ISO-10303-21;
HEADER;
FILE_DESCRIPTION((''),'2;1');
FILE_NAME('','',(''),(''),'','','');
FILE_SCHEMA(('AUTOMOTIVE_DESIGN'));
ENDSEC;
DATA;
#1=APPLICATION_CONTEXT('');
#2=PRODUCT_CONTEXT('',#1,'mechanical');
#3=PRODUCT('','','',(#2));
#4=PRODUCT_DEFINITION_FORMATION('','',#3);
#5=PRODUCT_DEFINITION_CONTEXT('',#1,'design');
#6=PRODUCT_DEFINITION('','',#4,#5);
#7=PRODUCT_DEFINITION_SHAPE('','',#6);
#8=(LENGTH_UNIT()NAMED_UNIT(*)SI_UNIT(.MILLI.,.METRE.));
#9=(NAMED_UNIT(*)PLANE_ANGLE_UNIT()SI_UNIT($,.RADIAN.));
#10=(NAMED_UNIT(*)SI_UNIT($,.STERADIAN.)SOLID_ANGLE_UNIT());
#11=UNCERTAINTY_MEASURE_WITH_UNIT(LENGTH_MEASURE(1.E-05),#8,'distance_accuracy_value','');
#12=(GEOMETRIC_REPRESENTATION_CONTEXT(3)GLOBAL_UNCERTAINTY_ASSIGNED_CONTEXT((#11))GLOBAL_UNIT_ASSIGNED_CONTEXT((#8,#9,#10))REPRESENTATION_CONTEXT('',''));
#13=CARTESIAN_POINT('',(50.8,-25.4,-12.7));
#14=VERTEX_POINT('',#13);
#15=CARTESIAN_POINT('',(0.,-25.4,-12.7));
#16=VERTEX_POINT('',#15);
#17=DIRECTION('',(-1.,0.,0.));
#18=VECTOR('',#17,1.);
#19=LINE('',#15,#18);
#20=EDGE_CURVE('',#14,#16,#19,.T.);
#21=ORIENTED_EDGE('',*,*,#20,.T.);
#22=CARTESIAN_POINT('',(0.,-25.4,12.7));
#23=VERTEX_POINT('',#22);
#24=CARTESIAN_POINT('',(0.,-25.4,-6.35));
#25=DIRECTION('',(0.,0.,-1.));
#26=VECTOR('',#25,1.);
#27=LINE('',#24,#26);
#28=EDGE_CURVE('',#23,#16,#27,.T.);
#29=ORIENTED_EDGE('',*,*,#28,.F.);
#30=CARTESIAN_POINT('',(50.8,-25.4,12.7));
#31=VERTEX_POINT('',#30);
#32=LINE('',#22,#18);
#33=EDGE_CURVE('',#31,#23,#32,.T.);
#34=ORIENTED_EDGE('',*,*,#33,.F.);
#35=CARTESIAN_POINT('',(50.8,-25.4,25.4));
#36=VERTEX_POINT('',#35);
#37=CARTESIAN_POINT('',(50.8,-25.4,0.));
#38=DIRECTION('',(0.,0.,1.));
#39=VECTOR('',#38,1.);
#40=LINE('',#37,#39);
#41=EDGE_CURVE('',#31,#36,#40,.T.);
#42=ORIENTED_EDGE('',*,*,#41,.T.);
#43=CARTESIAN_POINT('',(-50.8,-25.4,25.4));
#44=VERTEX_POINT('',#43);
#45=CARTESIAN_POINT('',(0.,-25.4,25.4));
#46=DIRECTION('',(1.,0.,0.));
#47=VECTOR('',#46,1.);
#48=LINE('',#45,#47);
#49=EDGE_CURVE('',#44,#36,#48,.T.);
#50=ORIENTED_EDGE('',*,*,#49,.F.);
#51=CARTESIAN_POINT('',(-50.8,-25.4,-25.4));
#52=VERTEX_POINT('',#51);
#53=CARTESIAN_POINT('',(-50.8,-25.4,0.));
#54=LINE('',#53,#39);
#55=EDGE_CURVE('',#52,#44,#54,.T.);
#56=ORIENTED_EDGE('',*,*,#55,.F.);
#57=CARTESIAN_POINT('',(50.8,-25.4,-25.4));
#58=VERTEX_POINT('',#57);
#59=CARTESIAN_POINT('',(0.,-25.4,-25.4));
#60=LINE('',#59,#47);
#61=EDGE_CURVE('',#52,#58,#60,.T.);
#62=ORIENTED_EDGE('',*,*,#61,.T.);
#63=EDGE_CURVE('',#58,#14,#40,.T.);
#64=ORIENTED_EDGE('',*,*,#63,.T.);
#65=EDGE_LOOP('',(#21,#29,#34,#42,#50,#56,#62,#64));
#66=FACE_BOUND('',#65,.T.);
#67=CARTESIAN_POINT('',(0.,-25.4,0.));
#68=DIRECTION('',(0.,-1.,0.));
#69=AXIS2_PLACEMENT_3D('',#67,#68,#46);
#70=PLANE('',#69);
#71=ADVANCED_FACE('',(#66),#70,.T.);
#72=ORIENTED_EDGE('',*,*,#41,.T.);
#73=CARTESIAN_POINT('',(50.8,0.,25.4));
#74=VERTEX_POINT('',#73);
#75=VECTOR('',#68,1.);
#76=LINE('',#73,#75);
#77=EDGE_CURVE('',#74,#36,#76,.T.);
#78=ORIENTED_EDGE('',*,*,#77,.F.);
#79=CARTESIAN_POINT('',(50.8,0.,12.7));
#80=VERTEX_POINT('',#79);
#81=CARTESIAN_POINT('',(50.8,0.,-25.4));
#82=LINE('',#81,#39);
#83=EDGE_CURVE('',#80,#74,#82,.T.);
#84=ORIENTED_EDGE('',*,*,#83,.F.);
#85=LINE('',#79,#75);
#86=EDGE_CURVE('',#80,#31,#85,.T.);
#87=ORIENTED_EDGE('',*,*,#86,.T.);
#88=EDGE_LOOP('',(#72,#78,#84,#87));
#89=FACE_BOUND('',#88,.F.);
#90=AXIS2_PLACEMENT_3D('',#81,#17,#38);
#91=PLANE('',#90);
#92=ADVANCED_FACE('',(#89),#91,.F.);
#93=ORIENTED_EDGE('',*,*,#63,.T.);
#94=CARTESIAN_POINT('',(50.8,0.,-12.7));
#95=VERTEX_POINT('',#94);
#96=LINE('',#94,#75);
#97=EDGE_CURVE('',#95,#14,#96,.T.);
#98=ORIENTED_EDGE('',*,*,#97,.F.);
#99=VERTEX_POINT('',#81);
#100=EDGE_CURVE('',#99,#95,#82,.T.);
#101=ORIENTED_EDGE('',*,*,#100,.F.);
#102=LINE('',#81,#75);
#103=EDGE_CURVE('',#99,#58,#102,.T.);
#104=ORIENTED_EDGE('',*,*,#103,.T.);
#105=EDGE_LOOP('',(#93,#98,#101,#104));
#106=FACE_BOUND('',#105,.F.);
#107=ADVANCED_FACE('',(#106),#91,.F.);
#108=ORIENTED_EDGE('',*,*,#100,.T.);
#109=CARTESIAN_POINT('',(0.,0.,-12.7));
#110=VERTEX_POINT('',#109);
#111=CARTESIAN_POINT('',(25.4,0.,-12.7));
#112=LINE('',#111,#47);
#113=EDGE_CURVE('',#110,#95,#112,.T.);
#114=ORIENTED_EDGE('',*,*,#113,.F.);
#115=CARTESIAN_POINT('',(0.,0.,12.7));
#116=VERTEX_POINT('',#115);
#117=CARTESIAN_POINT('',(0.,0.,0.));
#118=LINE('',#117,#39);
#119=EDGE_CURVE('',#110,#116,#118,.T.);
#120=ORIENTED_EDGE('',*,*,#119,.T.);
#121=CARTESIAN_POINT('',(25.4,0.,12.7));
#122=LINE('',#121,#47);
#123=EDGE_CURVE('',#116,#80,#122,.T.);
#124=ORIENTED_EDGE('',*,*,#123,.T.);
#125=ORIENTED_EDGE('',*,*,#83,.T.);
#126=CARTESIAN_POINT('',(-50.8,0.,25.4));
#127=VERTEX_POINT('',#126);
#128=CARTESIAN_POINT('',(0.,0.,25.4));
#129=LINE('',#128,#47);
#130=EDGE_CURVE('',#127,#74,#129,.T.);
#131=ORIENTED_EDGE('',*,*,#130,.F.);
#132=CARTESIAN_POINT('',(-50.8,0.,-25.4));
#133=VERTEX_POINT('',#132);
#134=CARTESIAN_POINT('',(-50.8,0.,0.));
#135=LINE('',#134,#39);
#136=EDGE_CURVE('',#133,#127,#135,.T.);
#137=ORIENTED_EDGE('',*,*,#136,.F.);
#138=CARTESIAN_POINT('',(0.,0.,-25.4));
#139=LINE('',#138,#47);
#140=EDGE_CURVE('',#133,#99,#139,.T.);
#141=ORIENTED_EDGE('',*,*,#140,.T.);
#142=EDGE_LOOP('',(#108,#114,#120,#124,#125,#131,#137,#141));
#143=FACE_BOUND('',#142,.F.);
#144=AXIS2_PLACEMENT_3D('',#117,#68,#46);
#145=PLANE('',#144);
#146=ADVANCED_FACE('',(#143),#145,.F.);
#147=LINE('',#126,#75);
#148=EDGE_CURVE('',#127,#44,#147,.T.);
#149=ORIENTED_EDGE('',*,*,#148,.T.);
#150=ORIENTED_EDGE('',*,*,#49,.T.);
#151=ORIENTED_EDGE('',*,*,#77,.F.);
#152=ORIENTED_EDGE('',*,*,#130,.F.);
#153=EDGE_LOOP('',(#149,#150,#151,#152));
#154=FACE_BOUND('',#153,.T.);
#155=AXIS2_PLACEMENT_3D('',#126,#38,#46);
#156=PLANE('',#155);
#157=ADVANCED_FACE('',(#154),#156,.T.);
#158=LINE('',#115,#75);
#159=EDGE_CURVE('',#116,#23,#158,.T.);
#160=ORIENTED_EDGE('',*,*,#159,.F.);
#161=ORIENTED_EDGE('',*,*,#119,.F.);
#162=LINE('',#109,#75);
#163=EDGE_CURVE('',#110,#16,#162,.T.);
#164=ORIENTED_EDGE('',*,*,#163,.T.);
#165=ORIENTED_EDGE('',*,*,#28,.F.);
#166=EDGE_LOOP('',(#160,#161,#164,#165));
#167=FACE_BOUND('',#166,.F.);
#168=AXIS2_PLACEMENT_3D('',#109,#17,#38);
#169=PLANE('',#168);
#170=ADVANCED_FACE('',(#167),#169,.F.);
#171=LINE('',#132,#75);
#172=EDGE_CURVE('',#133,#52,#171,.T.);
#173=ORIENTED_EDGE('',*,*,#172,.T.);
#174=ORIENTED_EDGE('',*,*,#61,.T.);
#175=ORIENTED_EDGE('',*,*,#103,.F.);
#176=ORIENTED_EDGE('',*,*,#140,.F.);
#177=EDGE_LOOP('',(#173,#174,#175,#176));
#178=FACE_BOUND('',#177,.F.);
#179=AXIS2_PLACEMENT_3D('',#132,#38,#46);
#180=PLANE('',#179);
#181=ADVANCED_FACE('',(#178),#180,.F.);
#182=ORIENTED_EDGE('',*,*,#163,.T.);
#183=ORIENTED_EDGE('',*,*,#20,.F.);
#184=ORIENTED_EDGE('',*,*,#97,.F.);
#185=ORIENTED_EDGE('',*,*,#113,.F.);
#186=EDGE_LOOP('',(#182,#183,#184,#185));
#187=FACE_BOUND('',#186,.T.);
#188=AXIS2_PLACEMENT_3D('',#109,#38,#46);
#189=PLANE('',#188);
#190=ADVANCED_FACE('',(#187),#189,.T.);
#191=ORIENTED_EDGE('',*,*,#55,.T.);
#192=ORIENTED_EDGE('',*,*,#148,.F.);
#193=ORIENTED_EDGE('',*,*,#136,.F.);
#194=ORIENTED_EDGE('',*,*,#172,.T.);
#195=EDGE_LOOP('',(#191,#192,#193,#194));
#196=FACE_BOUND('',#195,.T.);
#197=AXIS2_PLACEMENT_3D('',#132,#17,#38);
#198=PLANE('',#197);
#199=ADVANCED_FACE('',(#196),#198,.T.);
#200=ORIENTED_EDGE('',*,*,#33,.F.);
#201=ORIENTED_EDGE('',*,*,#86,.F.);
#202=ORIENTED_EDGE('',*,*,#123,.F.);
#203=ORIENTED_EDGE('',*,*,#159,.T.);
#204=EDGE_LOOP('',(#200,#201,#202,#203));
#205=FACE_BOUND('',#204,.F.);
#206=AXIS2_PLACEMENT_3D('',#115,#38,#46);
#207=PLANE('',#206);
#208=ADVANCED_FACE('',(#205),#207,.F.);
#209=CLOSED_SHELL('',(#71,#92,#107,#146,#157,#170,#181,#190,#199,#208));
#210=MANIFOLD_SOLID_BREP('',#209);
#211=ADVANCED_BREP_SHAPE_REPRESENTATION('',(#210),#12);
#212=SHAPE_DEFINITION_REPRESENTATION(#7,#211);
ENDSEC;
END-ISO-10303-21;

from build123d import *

# Parameters (mm, degrees)
F0_W     = 101.6
F0_H     = 50.8
F1_DEPTH = 25.4
F2_W     = 50.8
F2_H     = 25.4
F3_DEPTH = 130
F4_DEPTH = 25.401


# Not quite as in the source:
# - an extrude ends at something that could not be found from the text; its depth is read off the source's solid


with BuildPart() as f1:
    # F0 (on Front) → F1 (new body)
    with BuildSketch(Plane.XZ):
        Rectangle(F0_W, F0_H)
    extrude(amount=F1_DEPTH)

    # F2 (on Front) → F3 (cut, through all)
    with BuildSketch(Plane.XZ):
        with Locations((25.4, 0)):
            Rectangle(F2_W, F2_H)
    extrude(amount=-F3_DEPTH, mode=Mode.SUBTRACT)

    # F2 (on Front) → F4 (cut, through all)
    with BuildSketch(Plane.XZ):
        with Locations((25.4, 0)):
            Rectangle(F2_W, F2_H)
    extrude(amount=F4_DEPTH, mode=Mode.SUBTRACT)


solid = f1.part
